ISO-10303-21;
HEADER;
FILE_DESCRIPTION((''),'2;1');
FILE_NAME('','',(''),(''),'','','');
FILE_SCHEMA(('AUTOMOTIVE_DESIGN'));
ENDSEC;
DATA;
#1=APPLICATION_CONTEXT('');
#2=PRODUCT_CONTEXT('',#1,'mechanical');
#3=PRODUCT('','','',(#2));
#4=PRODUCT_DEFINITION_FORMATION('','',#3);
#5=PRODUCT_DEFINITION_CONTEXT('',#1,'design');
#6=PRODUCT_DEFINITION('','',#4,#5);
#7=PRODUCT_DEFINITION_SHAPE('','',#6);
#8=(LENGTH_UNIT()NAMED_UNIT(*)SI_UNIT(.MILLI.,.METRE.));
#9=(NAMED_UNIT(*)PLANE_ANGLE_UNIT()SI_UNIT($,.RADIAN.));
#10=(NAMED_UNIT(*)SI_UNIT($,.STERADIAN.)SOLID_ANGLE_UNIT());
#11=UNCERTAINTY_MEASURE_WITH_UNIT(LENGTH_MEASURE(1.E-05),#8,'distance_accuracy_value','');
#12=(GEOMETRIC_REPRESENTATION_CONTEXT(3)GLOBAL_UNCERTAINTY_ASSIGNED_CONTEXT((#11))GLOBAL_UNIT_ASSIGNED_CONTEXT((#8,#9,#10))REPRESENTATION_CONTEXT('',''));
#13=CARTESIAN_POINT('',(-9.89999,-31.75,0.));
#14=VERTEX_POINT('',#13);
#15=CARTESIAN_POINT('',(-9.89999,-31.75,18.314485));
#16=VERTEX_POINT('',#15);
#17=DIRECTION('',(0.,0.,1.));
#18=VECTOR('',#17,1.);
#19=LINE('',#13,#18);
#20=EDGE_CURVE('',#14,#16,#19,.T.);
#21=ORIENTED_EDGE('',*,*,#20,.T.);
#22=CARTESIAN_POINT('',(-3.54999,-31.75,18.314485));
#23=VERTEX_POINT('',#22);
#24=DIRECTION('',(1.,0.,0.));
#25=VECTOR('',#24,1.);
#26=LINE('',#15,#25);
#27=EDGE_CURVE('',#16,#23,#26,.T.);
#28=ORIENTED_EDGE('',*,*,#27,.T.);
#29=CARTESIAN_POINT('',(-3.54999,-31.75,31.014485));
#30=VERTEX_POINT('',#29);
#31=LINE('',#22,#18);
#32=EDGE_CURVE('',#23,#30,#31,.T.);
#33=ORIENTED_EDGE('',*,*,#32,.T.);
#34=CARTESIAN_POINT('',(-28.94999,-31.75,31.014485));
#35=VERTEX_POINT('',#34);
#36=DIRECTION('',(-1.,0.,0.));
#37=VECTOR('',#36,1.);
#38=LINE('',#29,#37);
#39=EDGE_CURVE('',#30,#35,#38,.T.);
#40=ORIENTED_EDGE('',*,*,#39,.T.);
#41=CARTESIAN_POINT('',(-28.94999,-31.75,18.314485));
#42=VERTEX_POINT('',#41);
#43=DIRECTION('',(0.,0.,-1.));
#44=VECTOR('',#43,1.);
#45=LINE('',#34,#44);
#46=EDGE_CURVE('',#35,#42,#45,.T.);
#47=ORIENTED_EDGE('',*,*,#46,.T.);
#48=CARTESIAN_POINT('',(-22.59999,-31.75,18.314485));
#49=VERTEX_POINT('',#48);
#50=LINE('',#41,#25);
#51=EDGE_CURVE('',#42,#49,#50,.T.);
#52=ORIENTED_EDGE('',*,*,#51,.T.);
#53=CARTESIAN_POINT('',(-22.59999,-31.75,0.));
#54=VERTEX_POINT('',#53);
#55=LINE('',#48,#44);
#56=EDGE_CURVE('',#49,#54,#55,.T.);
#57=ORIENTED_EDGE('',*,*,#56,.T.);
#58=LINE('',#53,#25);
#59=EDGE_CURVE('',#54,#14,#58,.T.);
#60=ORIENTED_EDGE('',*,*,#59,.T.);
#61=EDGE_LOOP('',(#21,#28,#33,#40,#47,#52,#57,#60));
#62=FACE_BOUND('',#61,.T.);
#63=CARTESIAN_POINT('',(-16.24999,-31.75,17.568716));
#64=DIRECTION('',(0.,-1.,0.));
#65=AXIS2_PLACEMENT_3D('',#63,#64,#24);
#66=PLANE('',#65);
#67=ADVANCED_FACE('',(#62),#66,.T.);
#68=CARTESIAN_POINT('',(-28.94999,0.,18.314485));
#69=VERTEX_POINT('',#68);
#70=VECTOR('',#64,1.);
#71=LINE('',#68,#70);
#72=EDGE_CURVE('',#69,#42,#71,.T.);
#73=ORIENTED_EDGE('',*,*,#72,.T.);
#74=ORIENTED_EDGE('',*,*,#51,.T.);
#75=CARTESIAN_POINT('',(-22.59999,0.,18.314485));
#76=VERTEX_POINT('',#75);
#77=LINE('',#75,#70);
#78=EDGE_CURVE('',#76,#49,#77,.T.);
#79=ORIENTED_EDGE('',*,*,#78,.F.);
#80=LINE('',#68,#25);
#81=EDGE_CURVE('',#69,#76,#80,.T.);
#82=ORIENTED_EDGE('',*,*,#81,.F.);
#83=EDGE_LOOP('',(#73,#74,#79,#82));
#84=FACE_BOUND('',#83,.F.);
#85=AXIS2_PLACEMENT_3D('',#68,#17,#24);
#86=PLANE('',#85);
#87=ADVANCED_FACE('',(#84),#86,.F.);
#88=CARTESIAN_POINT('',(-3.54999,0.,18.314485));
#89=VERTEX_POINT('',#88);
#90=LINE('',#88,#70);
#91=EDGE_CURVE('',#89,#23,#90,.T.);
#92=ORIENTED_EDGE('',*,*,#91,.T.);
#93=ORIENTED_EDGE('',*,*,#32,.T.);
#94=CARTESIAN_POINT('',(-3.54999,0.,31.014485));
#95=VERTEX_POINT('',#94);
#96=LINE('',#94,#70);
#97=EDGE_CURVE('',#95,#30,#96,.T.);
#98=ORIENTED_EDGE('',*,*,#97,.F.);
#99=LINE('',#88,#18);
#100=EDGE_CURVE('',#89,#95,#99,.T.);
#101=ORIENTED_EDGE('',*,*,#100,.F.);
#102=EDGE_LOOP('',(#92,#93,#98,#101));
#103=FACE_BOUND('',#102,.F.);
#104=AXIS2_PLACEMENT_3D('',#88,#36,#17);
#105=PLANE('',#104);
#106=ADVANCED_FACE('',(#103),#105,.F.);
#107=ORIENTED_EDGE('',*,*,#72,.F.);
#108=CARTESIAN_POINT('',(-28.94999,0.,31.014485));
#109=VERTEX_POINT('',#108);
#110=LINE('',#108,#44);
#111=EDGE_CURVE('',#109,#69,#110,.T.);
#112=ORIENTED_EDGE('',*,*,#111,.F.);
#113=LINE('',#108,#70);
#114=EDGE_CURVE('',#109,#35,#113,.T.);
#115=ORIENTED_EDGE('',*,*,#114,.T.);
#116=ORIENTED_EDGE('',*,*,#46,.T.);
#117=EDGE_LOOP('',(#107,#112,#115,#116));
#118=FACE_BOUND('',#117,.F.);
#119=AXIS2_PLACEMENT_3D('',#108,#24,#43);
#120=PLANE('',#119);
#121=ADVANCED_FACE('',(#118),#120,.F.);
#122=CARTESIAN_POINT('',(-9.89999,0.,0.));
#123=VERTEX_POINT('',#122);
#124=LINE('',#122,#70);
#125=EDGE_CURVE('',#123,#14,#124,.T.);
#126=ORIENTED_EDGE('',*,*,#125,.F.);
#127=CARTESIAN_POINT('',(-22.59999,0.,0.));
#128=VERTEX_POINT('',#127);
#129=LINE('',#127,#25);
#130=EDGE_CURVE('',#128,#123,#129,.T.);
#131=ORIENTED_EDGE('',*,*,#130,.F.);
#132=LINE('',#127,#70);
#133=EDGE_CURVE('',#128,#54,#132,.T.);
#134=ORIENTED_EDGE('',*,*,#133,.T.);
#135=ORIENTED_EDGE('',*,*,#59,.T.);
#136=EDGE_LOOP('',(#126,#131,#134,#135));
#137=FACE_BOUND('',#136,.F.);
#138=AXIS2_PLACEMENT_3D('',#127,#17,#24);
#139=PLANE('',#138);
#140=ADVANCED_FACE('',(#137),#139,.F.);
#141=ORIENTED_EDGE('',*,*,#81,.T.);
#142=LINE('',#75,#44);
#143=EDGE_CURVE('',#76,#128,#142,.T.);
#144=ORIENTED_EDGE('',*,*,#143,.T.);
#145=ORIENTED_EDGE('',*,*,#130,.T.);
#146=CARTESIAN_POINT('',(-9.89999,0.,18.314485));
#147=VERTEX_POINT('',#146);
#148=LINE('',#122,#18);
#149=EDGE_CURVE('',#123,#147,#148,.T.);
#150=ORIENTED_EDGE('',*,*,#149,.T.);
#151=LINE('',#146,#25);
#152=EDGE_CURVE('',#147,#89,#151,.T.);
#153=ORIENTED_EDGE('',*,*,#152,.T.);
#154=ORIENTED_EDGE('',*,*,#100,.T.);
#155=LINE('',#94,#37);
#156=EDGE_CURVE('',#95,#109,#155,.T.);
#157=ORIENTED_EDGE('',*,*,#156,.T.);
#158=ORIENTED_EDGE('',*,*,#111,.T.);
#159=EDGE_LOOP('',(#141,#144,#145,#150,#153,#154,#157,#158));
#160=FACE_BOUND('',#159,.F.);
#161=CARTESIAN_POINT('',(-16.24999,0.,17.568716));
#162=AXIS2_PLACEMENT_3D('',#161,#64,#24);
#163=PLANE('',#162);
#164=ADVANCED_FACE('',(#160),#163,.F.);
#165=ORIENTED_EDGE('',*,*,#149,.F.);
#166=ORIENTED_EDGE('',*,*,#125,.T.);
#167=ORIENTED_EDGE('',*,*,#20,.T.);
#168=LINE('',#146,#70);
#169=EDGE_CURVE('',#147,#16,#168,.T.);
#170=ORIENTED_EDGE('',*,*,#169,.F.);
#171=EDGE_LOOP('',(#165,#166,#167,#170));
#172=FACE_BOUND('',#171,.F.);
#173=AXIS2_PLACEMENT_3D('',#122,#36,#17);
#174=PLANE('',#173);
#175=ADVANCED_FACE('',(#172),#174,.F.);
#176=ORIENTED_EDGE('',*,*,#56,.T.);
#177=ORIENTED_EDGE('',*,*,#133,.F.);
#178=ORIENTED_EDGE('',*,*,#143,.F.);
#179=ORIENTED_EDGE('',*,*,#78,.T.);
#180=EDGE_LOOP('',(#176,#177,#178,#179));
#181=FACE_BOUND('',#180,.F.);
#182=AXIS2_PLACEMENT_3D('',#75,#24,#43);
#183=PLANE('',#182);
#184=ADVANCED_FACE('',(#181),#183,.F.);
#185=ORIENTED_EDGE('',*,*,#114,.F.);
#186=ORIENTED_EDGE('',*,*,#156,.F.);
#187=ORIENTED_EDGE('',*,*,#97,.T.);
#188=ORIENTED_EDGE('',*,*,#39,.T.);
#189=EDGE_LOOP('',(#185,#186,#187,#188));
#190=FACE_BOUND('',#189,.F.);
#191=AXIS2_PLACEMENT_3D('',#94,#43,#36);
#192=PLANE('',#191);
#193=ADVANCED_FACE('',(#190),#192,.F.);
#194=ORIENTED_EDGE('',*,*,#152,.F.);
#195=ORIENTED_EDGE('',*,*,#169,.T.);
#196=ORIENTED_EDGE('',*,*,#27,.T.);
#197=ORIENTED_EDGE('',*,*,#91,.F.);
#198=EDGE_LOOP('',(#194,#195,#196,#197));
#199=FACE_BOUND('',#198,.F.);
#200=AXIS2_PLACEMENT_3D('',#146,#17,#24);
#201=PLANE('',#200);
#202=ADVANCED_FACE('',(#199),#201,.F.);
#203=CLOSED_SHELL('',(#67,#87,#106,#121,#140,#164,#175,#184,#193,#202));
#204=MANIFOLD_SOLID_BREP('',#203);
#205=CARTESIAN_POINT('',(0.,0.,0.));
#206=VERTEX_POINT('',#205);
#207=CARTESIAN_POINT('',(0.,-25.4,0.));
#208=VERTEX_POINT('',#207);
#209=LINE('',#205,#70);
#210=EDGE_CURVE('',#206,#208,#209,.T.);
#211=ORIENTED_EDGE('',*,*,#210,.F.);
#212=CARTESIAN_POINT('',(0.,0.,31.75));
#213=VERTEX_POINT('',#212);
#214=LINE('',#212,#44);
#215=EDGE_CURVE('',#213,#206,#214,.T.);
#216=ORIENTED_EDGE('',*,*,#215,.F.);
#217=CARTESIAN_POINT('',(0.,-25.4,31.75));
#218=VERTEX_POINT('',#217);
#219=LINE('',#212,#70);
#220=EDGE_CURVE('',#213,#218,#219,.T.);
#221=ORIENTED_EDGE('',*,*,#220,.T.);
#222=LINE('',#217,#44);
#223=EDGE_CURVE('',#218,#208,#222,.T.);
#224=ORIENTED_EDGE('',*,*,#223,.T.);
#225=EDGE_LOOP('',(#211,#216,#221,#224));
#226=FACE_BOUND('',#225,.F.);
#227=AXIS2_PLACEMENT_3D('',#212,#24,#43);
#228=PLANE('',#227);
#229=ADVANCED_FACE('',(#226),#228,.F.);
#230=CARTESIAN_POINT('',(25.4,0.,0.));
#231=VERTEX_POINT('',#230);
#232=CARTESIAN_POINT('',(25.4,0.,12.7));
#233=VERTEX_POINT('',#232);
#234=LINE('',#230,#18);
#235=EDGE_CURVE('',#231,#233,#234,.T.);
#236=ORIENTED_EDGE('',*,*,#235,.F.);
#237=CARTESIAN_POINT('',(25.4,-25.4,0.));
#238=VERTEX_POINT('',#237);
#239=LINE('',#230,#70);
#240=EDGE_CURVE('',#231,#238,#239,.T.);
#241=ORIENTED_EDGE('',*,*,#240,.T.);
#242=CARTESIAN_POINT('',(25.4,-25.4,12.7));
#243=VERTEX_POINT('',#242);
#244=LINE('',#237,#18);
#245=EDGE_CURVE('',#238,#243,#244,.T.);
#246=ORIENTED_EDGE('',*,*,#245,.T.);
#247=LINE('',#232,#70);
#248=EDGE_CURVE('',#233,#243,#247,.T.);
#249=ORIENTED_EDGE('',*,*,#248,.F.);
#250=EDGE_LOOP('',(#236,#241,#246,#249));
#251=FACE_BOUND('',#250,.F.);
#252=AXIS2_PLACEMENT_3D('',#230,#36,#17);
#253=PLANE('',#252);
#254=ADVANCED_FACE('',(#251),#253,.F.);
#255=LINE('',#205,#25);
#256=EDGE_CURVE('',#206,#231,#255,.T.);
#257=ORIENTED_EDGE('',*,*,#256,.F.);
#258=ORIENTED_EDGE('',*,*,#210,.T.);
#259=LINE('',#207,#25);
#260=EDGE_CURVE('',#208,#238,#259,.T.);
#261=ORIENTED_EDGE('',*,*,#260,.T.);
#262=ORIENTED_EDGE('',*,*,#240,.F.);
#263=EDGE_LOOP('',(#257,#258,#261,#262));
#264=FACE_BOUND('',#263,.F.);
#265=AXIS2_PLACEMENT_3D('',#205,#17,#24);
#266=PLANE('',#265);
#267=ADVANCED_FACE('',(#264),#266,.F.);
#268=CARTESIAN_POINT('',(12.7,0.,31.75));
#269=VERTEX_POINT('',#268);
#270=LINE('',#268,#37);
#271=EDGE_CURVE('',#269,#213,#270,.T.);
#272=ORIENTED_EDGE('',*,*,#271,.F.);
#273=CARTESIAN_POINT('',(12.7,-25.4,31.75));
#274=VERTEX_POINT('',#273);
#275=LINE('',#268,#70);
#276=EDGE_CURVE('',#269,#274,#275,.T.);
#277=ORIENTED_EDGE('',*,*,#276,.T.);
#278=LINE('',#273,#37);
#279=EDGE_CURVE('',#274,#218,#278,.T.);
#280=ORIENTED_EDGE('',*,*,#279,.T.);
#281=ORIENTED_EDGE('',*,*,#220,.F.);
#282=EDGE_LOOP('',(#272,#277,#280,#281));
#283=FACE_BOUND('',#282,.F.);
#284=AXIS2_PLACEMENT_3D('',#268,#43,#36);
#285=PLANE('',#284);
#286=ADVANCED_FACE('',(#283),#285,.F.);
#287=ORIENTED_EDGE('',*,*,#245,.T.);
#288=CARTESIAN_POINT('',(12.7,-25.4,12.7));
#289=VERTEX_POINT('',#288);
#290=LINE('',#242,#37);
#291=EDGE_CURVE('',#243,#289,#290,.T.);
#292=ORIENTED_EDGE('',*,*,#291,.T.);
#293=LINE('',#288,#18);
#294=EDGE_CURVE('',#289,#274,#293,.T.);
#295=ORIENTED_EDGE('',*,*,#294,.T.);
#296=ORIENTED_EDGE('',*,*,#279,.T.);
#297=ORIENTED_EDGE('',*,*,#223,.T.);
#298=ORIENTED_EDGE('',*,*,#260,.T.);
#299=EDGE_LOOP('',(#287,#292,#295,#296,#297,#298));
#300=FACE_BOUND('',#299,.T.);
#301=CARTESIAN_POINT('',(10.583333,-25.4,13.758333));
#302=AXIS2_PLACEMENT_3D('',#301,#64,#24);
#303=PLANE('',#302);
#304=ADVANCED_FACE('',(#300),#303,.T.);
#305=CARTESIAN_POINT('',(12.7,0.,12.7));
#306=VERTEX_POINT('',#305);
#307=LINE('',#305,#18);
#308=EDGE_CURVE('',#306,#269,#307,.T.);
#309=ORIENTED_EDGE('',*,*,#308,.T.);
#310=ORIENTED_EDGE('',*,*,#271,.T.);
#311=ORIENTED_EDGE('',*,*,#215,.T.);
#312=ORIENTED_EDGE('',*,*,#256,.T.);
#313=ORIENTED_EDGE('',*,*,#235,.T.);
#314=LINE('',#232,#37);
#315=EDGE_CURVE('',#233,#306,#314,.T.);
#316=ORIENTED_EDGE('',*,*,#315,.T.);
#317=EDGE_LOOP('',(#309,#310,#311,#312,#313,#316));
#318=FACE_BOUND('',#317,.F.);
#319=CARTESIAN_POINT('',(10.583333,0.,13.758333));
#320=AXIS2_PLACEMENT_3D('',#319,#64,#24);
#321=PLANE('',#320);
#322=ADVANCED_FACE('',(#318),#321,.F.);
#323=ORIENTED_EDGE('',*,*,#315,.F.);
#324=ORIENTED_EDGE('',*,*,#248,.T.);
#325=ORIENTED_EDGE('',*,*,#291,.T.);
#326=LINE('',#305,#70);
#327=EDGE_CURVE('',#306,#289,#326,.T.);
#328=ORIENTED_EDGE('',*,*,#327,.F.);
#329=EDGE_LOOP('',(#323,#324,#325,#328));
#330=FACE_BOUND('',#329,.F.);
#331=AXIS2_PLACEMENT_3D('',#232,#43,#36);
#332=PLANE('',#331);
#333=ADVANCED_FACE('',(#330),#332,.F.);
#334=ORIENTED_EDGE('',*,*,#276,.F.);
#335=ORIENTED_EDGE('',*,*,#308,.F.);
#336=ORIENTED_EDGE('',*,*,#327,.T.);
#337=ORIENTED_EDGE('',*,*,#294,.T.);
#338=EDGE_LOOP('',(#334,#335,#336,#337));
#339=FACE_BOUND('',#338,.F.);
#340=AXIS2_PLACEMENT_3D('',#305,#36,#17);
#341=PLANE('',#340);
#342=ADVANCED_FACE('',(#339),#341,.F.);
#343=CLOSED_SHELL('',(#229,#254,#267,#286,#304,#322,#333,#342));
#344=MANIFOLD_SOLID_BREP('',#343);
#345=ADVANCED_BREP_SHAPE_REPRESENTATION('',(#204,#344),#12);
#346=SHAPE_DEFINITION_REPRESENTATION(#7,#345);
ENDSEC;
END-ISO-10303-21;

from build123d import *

# Parameters (mm, degrees)
F1_DEPTH = 25.4
F3_DEPTH = 31.75


# Not quite as in the source:
# - a length typed as a fraction of an inch, garbled in the dataset ("3 / 203.2 mm" for 3/8 in), is restored


with BuildPart() as f1:
    # F0 (on Front) → F1 (new body)
    with BuildSketch(Plane.XZ):
        Polygon((12.7, 31.75), (0, 31.75), (0, 0), (25.4, 0), (25.4, 12.7), (12.7, 12.7), align=None)
    extrude(amount=F1_DEPTH)


with BuildPart() as f3:
    # F2 (on Front) → F3 (new body)
    with BuildSketch(Plane.XZ):
        Polygon((-22.599989511, 0), (-9.899989511, 0), (-9.899989511, 18.3144848176), (-3.549989511, 18.3144848176), (-3.549989511, 31.0144848176), (-28.949989511, 31.0144848176), (-28.949989511, 18.3144848176), (-22.599989511, 18.3144848176), align=None)
    extrude(amount=F3_DEPTH)


solid = Compound([f1.part, f3.part])
